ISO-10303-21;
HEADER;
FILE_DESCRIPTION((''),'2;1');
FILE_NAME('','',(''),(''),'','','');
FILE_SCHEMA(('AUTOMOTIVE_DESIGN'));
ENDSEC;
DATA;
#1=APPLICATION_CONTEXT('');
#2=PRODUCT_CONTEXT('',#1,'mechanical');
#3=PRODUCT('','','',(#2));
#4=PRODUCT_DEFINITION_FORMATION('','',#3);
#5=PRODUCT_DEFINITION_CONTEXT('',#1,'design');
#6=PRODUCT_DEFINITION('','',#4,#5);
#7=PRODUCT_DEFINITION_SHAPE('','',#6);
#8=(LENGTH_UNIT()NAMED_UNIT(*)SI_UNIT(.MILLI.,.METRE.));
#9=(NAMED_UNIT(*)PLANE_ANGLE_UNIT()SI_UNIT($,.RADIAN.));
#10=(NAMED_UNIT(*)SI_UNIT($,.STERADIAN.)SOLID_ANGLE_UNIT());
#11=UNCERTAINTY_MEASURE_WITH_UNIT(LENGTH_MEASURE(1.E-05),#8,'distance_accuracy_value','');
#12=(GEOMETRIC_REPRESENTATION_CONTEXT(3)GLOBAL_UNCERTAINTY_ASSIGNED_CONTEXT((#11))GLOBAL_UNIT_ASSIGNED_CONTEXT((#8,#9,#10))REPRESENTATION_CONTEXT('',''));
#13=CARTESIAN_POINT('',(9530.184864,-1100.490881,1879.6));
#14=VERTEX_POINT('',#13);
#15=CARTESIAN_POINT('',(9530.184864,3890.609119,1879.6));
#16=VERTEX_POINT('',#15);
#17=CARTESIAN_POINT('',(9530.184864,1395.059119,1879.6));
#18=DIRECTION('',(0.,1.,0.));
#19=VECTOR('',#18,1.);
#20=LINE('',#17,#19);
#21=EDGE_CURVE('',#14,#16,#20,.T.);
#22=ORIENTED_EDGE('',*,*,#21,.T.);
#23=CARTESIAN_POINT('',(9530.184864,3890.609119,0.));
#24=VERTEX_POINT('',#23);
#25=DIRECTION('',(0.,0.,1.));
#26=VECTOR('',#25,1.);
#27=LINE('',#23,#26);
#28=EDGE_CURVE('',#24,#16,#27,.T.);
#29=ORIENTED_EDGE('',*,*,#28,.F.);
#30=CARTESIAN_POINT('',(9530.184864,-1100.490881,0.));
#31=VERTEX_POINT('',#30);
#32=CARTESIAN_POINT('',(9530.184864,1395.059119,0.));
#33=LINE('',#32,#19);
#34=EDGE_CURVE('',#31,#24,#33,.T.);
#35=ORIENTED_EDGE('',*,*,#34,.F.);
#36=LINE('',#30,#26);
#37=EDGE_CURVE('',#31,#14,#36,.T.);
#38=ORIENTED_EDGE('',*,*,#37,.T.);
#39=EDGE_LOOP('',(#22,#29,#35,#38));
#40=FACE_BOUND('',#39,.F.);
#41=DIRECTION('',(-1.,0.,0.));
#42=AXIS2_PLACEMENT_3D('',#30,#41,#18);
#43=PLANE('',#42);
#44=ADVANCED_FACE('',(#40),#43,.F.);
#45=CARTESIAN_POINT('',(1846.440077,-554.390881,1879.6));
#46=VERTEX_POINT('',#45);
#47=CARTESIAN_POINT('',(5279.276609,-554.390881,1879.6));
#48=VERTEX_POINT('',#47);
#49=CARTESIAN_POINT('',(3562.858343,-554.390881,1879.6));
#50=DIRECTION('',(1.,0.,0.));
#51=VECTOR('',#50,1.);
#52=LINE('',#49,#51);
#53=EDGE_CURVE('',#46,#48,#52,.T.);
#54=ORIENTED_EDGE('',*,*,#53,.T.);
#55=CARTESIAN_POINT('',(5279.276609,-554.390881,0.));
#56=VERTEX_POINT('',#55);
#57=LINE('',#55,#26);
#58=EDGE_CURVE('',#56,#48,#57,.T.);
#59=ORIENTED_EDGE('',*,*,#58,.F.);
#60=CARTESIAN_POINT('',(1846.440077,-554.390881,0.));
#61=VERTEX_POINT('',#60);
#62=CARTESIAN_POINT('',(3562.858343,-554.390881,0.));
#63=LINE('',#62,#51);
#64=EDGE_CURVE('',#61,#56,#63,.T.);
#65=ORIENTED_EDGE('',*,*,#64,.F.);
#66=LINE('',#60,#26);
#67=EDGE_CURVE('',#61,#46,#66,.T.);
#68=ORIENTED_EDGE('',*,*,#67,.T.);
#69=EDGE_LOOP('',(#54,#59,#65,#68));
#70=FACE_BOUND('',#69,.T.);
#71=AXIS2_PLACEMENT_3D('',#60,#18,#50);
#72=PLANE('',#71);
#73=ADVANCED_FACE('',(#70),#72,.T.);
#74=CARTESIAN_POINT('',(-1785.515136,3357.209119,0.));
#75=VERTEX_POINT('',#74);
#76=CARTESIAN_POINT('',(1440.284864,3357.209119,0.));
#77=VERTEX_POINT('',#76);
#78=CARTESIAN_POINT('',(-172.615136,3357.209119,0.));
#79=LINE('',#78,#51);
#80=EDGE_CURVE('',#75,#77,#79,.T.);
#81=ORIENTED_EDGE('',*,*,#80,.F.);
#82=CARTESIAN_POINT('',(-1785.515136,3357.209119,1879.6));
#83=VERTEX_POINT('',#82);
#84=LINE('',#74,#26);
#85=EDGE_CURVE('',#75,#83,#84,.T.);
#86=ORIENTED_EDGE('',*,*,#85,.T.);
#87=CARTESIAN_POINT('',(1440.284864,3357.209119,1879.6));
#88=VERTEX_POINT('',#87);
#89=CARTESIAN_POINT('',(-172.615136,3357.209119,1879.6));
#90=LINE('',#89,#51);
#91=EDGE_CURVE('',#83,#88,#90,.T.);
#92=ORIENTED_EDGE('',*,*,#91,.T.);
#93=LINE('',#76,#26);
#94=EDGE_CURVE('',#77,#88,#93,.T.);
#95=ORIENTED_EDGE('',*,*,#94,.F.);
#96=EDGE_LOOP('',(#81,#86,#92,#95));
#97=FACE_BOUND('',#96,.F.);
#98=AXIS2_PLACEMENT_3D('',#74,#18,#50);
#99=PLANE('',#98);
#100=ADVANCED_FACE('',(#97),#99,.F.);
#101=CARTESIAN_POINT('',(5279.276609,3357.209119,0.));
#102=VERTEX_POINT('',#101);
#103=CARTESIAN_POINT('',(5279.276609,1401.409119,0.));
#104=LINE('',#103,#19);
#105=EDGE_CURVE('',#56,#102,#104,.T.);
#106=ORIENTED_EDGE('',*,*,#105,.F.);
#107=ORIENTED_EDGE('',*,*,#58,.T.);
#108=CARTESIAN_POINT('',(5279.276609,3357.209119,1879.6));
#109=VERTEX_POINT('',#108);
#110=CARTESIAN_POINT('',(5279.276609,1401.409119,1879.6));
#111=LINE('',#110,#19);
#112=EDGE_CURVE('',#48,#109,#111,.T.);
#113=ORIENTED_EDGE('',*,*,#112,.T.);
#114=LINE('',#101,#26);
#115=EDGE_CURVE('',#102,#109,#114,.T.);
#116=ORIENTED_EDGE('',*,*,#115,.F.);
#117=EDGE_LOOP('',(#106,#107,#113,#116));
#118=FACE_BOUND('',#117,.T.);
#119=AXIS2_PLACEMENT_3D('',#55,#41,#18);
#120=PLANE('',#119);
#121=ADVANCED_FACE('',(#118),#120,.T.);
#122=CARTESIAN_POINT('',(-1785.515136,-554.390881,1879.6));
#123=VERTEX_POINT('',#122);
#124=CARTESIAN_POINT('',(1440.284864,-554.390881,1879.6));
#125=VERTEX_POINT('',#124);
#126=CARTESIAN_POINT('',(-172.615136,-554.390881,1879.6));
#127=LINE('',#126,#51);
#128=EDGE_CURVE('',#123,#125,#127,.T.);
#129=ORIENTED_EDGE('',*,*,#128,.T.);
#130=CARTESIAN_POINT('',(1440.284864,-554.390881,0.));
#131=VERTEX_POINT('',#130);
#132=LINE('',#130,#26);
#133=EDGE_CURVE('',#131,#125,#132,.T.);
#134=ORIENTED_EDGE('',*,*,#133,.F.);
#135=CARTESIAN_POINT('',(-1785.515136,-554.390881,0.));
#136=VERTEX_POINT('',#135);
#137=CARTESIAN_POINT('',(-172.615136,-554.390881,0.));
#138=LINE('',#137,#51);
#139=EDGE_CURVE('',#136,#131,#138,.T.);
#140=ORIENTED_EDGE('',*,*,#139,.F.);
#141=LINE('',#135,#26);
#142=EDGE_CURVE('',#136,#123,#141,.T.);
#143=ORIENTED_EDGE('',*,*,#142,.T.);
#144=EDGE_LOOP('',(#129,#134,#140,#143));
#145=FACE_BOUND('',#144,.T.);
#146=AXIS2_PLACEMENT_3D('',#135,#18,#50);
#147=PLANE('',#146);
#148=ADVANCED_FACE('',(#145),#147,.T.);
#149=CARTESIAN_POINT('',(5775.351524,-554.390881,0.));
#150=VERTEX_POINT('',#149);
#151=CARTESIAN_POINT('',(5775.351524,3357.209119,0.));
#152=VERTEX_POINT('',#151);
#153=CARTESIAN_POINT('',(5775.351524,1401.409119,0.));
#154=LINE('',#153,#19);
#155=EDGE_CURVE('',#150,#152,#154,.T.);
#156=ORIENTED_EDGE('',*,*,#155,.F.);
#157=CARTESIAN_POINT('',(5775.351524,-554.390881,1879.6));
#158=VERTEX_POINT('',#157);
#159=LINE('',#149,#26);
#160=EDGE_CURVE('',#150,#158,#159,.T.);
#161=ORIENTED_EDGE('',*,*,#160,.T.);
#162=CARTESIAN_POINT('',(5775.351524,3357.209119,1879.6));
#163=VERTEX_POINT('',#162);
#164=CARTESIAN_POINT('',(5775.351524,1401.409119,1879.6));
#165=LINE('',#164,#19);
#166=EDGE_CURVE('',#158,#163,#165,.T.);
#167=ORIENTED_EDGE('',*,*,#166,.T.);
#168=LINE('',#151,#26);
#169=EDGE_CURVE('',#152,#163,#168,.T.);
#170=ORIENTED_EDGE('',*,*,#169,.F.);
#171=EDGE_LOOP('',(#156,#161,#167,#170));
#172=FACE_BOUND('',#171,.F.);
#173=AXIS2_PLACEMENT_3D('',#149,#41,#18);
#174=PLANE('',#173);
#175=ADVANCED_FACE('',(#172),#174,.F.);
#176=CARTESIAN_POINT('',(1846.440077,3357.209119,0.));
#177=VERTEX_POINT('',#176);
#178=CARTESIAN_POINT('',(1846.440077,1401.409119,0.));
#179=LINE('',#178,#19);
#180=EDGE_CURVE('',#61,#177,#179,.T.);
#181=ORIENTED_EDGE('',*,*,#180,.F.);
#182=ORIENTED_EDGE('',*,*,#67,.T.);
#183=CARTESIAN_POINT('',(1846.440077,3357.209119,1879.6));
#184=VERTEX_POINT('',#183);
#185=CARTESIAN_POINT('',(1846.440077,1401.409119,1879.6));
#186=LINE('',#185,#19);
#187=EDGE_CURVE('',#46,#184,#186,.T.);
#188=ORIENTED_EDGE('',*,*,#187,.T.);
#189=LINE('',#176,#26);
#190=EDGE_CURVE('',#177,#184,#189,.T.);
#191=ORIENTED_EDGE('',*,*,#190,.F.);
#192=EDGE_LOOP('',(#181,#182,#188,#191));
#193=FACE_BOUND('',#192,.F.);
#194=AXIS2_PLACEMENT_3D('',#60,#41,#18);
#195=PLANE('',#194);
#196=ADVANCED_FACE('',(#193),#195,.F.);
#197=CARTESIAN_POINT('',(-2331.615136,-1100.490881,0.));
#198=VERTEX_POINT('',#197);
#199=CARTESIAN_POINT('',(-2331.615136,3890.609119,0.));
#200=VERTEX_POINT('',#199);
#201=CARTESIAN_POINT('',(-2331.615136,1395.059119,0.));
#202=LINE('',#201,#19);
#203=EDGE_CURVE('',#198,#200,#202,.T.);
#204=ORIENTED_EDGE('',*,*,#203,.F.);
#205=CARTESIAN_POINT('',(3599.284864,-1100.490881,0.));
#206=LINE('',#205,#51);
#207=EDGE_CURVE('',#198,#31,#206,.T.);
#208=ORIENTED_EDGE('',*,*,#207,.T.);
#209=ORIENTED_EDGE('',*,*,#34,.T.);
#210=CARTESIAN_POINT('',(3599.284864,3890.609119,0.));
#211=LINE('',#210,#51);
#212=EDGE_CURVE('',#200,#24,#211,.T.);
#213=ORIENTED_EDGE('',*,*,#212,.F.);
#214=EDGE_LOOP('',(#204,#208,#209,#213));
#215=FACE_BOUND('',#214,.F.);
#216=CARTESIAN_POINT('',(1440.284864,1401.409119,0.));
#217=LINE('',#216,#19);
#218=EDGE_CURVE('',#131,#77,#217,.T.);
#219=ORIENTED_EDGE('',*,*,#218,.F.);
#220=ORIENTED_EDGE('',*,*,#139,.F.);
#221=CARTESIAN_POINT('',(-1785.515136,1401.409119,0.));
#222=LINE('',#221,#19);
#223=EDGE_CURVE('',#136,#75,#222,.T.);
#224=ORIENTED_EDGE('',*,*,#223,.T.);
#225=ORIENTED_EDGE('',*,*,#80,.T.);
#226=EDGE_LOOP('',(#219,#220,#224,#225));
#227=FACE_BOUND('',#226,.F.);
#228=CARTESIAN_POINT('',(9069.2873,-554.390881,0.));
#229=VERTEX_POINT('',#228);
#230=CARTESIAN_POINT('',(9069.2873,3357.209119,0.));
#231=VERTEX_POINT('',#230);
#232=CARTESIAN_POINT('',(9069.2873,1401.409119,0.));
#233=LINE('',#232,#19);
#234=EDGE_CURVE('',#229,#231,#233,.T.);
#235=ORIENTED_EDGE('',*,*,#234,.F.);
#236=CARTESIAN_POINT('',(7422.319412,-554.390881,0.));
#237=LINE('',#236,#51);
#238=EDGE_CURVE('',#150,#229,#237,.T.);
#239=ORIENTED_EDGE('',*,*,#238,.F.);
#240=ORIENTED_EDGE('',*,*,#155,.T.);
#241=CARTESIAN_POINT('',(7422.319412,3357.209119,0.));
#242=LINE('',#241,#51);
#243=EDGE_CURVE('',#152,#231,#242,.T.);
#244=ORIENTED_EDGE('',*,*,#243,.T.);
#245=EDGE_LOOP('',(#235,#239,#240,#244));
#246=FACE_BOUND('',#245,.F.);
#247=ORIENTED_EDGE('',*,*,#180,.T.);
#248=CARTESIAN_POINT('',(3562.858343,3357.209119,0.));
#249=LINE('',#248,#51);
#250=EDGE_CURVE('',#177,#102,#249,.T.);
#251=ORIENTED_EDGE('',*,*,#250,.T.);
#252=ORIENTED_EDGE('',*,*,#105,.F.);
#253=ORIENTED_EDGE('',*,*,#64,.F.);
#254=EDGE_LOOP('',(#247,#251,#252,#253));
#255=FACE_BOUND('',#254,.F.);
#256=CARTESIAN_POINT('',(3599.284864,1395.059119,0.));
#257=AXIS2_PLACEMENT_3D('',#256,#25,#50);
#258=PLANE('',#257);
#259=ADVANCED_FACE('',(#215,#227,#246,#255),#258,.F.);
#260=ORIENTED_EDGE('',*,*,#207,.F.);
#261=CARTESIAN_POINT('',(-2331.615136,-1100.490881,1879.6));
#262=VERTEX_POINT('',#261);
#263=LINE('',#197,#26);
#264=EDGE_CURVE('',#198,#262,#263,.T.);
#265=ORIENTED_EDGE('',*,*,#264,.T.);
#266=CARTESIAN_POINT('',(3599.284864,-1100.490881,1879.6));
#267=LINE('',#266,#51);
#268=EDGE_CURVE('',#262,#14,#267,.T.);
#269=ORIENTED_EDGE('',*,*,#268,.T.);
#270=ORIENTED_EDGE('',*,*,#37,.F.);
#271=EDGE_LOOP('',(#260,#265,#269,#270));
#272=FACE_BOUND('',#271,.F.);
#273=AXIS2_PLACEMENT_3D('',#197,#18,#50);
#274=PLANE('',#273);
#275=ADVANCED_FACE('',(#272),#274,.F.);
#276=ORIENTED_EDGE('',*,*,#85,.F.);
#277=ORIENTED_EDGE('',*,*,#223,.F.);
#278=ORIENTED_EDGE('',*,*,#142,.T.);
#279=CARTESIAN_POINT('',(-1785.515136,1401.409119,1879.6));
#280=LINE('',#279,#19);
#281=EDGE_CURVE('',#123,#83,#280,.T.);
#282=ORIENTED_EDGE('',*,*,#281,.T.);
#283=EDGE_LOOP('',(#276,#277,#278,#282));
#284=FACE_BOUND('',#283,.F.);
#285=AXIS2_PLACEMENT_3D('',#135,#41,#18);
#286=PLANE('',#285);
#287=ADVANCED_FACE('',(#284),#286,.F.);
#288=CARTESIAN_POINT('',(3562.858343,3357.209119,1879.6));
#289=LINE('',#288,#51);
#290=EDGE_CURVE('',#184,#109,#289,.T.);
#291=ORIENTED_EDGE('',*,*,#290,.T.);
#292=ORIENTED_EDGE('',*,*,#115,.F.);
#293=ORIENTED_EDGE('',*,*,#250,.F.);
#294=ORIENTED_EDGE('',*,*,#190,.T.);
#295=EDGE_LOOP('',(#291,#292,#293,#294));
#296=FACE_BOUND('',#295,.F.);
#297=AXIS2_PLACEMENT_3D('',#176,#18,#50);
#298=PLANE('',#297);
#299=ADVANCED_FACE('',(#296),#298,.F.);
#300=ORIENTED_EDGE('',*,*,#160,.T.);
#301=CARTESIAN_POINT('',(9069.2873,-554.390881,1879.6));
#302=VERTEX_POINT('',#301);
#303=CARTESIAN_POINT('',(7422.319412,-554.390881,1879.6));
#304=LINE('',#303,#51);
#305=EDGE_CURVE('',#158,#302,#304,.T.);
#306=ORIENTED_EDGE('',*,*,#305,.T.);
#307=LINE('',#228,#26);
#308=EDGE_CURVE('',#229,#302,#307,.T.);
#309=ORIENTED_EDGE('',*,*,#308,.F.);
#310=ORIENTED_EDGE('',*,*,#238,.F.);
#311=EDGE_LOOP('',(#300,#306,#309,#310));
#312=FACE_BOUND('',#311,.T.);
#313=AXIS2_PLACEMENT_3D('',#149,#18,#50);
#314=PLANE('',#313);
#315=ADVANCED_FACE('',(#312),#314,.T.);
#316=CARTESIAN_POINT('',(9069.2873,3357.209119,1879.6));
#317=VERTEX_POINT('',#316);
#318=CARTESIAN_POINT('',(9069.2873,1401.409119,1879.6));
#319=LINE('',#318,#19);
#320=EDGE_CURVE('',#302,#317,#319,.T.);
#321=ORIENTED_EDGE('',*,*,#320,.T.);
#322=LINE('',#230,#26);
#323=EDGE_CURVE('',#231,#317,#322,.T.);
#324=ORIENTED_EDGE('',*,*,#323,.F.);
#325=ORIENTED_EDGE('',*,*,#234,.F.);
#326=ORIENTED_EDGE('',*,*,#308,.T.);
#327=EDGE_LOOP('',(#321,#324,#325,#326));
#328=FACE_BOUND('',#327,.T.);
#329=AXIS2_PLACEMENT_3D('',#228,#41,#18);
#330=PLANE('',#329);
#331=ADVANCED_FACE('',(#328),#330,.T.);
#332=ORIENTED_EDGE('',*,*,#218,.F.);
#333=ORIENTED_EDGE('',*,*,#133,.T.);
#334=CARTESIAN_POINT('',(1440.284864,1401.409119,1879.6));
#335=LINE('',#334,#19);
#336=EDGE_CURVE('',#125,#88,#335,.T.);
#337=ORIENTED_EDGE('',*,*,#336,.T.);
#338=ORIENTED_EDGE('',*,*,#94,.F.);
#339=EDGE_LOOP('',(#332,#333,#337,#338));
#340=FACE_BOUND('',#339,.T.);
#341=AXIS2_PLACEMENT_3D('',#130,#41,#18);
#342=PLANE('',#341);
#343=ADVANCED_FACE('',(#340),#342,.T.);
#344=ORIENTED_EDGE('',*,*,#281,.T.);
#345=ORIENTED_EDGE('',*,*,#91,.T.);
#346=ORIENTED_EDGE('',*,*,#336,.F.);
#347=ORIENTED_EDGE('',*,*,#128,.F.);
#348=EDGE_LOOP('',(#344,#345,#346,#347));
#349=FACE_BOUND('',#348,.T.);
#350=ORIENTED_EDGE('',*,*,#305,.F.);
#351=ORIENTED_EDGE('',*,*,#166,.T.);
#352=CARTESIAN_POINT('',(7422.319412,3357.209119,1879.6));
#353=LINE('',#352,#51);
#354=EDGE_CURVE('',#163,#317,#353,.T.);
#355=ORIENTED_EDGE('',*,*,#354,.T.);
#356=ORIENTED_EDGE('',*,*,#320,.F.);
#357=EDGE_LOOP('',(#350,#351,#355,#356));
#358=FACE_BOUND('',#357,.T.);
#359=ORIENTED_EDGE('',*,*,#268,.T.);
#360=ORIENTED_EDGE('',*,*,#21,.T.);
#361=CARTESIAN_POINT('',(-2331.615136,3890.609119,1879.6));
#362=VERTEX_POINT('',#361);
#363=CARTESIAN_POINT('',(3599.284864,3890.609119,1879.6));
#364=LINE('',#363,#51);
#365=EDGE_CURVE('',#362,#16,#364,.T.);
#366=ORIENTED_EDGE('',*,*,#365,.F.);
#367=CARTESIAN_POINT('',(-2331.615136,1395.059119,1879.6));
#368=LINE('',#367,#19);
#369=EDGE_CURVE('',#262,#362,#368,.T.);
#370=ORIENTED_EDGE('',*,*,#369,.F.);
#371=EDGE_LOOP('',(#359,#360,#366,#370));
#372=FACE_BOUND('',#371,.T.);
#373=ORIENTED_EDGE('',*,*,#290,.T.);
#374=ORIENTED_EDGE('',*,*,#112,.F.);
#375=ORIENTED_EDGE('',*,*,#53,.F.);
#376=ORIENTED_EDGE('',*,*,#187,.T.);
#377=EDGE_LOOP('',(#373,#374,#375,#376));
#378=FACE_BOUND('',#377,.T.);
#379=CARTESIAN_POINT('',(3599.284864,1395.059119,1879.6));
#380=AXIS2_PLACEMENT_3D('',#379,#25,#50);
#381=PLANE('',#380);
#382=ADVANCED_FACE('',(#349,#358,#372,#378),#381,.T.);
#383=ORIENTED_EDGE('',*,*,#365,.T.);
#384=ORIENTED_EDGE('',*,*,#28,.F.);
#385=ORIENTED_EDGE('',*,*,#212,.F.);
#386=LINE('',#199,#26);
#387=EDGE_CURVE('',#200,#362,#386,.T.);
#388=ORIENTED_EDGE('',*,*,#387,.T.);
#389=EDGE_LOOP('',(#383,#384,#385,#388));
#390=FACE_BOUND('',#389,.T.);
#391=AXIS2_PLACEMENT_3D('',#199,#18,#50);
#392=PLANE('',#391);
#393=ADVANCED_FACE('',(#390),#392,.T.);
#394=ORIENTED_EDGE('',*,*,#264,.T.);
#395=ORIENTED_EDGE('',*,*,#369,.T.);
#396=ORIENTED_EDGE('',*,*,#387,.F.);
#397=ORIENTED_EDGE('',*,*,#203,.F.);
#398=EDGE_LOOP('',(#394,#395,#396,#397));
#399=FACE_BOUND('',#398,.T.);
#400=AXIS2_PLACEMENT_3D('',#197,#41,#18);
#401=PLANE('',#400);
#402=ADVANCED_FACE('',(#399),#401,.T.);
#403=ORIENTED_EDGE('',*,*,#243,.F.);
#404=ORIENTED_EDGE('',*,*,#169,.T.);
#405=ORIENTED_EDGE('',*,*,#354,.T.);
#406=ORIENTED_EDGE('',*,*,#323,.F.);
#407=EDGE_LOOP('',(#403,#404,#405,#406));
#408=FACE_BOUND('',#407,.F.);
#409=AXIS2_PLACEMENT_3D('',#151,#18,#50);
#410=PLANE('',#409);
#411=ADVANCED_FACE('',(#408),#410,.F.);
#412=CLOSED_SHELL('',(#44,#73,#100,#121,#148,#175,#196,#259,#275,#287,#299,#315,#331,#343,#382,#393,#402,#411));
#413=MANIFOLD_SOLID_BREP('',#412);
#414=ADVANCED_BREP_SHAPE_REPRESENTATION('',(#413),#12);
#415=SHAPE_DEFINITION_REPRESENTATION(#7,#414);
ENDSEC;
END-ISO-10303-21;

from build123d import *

# Parameters (mm, degrees)
F0_W     = 11861.8
F0_H     = 4991.1
F0_W_2   = 3225.8
F0_H_2   = 3911.6
F0_W_3   = 3432.8365325928
F0_W_4   = 3293.9357757568
F1_DEPTH = 1879.6


# Not quite as in the source:
# - the program builds the solid bodies; features that only make, move or delete a surface that nothing else refers to are left out


with BuildPart() as f1:
    # F0 (on Top) → F1 (new body)
    with BuildSketch(Plane.XY):
        with Locations((3599.2848639578, 1395.0591189232)):
            Rectangle(F0_W, F0_H)
        with Locations((-172.6151360422, 1401.4091189232)):
            Rectangle(F0_W_2, F0_H_2, mode=Mode.SUBTRACT)
        with Locations((3562.8583431244, 1401.4091189232)):
            Rectangle(F0_W_3, F0_H_2, mode=Mode.SUBTRACT)
        with Locations((7422.3194122314, 1401.4091189232)):
            Rectangle(F0_W_4, F0_H_2, mode=Mode.SUBTRACT)
    extrude(amount=F1_DEPTH)


solid = f1.part
